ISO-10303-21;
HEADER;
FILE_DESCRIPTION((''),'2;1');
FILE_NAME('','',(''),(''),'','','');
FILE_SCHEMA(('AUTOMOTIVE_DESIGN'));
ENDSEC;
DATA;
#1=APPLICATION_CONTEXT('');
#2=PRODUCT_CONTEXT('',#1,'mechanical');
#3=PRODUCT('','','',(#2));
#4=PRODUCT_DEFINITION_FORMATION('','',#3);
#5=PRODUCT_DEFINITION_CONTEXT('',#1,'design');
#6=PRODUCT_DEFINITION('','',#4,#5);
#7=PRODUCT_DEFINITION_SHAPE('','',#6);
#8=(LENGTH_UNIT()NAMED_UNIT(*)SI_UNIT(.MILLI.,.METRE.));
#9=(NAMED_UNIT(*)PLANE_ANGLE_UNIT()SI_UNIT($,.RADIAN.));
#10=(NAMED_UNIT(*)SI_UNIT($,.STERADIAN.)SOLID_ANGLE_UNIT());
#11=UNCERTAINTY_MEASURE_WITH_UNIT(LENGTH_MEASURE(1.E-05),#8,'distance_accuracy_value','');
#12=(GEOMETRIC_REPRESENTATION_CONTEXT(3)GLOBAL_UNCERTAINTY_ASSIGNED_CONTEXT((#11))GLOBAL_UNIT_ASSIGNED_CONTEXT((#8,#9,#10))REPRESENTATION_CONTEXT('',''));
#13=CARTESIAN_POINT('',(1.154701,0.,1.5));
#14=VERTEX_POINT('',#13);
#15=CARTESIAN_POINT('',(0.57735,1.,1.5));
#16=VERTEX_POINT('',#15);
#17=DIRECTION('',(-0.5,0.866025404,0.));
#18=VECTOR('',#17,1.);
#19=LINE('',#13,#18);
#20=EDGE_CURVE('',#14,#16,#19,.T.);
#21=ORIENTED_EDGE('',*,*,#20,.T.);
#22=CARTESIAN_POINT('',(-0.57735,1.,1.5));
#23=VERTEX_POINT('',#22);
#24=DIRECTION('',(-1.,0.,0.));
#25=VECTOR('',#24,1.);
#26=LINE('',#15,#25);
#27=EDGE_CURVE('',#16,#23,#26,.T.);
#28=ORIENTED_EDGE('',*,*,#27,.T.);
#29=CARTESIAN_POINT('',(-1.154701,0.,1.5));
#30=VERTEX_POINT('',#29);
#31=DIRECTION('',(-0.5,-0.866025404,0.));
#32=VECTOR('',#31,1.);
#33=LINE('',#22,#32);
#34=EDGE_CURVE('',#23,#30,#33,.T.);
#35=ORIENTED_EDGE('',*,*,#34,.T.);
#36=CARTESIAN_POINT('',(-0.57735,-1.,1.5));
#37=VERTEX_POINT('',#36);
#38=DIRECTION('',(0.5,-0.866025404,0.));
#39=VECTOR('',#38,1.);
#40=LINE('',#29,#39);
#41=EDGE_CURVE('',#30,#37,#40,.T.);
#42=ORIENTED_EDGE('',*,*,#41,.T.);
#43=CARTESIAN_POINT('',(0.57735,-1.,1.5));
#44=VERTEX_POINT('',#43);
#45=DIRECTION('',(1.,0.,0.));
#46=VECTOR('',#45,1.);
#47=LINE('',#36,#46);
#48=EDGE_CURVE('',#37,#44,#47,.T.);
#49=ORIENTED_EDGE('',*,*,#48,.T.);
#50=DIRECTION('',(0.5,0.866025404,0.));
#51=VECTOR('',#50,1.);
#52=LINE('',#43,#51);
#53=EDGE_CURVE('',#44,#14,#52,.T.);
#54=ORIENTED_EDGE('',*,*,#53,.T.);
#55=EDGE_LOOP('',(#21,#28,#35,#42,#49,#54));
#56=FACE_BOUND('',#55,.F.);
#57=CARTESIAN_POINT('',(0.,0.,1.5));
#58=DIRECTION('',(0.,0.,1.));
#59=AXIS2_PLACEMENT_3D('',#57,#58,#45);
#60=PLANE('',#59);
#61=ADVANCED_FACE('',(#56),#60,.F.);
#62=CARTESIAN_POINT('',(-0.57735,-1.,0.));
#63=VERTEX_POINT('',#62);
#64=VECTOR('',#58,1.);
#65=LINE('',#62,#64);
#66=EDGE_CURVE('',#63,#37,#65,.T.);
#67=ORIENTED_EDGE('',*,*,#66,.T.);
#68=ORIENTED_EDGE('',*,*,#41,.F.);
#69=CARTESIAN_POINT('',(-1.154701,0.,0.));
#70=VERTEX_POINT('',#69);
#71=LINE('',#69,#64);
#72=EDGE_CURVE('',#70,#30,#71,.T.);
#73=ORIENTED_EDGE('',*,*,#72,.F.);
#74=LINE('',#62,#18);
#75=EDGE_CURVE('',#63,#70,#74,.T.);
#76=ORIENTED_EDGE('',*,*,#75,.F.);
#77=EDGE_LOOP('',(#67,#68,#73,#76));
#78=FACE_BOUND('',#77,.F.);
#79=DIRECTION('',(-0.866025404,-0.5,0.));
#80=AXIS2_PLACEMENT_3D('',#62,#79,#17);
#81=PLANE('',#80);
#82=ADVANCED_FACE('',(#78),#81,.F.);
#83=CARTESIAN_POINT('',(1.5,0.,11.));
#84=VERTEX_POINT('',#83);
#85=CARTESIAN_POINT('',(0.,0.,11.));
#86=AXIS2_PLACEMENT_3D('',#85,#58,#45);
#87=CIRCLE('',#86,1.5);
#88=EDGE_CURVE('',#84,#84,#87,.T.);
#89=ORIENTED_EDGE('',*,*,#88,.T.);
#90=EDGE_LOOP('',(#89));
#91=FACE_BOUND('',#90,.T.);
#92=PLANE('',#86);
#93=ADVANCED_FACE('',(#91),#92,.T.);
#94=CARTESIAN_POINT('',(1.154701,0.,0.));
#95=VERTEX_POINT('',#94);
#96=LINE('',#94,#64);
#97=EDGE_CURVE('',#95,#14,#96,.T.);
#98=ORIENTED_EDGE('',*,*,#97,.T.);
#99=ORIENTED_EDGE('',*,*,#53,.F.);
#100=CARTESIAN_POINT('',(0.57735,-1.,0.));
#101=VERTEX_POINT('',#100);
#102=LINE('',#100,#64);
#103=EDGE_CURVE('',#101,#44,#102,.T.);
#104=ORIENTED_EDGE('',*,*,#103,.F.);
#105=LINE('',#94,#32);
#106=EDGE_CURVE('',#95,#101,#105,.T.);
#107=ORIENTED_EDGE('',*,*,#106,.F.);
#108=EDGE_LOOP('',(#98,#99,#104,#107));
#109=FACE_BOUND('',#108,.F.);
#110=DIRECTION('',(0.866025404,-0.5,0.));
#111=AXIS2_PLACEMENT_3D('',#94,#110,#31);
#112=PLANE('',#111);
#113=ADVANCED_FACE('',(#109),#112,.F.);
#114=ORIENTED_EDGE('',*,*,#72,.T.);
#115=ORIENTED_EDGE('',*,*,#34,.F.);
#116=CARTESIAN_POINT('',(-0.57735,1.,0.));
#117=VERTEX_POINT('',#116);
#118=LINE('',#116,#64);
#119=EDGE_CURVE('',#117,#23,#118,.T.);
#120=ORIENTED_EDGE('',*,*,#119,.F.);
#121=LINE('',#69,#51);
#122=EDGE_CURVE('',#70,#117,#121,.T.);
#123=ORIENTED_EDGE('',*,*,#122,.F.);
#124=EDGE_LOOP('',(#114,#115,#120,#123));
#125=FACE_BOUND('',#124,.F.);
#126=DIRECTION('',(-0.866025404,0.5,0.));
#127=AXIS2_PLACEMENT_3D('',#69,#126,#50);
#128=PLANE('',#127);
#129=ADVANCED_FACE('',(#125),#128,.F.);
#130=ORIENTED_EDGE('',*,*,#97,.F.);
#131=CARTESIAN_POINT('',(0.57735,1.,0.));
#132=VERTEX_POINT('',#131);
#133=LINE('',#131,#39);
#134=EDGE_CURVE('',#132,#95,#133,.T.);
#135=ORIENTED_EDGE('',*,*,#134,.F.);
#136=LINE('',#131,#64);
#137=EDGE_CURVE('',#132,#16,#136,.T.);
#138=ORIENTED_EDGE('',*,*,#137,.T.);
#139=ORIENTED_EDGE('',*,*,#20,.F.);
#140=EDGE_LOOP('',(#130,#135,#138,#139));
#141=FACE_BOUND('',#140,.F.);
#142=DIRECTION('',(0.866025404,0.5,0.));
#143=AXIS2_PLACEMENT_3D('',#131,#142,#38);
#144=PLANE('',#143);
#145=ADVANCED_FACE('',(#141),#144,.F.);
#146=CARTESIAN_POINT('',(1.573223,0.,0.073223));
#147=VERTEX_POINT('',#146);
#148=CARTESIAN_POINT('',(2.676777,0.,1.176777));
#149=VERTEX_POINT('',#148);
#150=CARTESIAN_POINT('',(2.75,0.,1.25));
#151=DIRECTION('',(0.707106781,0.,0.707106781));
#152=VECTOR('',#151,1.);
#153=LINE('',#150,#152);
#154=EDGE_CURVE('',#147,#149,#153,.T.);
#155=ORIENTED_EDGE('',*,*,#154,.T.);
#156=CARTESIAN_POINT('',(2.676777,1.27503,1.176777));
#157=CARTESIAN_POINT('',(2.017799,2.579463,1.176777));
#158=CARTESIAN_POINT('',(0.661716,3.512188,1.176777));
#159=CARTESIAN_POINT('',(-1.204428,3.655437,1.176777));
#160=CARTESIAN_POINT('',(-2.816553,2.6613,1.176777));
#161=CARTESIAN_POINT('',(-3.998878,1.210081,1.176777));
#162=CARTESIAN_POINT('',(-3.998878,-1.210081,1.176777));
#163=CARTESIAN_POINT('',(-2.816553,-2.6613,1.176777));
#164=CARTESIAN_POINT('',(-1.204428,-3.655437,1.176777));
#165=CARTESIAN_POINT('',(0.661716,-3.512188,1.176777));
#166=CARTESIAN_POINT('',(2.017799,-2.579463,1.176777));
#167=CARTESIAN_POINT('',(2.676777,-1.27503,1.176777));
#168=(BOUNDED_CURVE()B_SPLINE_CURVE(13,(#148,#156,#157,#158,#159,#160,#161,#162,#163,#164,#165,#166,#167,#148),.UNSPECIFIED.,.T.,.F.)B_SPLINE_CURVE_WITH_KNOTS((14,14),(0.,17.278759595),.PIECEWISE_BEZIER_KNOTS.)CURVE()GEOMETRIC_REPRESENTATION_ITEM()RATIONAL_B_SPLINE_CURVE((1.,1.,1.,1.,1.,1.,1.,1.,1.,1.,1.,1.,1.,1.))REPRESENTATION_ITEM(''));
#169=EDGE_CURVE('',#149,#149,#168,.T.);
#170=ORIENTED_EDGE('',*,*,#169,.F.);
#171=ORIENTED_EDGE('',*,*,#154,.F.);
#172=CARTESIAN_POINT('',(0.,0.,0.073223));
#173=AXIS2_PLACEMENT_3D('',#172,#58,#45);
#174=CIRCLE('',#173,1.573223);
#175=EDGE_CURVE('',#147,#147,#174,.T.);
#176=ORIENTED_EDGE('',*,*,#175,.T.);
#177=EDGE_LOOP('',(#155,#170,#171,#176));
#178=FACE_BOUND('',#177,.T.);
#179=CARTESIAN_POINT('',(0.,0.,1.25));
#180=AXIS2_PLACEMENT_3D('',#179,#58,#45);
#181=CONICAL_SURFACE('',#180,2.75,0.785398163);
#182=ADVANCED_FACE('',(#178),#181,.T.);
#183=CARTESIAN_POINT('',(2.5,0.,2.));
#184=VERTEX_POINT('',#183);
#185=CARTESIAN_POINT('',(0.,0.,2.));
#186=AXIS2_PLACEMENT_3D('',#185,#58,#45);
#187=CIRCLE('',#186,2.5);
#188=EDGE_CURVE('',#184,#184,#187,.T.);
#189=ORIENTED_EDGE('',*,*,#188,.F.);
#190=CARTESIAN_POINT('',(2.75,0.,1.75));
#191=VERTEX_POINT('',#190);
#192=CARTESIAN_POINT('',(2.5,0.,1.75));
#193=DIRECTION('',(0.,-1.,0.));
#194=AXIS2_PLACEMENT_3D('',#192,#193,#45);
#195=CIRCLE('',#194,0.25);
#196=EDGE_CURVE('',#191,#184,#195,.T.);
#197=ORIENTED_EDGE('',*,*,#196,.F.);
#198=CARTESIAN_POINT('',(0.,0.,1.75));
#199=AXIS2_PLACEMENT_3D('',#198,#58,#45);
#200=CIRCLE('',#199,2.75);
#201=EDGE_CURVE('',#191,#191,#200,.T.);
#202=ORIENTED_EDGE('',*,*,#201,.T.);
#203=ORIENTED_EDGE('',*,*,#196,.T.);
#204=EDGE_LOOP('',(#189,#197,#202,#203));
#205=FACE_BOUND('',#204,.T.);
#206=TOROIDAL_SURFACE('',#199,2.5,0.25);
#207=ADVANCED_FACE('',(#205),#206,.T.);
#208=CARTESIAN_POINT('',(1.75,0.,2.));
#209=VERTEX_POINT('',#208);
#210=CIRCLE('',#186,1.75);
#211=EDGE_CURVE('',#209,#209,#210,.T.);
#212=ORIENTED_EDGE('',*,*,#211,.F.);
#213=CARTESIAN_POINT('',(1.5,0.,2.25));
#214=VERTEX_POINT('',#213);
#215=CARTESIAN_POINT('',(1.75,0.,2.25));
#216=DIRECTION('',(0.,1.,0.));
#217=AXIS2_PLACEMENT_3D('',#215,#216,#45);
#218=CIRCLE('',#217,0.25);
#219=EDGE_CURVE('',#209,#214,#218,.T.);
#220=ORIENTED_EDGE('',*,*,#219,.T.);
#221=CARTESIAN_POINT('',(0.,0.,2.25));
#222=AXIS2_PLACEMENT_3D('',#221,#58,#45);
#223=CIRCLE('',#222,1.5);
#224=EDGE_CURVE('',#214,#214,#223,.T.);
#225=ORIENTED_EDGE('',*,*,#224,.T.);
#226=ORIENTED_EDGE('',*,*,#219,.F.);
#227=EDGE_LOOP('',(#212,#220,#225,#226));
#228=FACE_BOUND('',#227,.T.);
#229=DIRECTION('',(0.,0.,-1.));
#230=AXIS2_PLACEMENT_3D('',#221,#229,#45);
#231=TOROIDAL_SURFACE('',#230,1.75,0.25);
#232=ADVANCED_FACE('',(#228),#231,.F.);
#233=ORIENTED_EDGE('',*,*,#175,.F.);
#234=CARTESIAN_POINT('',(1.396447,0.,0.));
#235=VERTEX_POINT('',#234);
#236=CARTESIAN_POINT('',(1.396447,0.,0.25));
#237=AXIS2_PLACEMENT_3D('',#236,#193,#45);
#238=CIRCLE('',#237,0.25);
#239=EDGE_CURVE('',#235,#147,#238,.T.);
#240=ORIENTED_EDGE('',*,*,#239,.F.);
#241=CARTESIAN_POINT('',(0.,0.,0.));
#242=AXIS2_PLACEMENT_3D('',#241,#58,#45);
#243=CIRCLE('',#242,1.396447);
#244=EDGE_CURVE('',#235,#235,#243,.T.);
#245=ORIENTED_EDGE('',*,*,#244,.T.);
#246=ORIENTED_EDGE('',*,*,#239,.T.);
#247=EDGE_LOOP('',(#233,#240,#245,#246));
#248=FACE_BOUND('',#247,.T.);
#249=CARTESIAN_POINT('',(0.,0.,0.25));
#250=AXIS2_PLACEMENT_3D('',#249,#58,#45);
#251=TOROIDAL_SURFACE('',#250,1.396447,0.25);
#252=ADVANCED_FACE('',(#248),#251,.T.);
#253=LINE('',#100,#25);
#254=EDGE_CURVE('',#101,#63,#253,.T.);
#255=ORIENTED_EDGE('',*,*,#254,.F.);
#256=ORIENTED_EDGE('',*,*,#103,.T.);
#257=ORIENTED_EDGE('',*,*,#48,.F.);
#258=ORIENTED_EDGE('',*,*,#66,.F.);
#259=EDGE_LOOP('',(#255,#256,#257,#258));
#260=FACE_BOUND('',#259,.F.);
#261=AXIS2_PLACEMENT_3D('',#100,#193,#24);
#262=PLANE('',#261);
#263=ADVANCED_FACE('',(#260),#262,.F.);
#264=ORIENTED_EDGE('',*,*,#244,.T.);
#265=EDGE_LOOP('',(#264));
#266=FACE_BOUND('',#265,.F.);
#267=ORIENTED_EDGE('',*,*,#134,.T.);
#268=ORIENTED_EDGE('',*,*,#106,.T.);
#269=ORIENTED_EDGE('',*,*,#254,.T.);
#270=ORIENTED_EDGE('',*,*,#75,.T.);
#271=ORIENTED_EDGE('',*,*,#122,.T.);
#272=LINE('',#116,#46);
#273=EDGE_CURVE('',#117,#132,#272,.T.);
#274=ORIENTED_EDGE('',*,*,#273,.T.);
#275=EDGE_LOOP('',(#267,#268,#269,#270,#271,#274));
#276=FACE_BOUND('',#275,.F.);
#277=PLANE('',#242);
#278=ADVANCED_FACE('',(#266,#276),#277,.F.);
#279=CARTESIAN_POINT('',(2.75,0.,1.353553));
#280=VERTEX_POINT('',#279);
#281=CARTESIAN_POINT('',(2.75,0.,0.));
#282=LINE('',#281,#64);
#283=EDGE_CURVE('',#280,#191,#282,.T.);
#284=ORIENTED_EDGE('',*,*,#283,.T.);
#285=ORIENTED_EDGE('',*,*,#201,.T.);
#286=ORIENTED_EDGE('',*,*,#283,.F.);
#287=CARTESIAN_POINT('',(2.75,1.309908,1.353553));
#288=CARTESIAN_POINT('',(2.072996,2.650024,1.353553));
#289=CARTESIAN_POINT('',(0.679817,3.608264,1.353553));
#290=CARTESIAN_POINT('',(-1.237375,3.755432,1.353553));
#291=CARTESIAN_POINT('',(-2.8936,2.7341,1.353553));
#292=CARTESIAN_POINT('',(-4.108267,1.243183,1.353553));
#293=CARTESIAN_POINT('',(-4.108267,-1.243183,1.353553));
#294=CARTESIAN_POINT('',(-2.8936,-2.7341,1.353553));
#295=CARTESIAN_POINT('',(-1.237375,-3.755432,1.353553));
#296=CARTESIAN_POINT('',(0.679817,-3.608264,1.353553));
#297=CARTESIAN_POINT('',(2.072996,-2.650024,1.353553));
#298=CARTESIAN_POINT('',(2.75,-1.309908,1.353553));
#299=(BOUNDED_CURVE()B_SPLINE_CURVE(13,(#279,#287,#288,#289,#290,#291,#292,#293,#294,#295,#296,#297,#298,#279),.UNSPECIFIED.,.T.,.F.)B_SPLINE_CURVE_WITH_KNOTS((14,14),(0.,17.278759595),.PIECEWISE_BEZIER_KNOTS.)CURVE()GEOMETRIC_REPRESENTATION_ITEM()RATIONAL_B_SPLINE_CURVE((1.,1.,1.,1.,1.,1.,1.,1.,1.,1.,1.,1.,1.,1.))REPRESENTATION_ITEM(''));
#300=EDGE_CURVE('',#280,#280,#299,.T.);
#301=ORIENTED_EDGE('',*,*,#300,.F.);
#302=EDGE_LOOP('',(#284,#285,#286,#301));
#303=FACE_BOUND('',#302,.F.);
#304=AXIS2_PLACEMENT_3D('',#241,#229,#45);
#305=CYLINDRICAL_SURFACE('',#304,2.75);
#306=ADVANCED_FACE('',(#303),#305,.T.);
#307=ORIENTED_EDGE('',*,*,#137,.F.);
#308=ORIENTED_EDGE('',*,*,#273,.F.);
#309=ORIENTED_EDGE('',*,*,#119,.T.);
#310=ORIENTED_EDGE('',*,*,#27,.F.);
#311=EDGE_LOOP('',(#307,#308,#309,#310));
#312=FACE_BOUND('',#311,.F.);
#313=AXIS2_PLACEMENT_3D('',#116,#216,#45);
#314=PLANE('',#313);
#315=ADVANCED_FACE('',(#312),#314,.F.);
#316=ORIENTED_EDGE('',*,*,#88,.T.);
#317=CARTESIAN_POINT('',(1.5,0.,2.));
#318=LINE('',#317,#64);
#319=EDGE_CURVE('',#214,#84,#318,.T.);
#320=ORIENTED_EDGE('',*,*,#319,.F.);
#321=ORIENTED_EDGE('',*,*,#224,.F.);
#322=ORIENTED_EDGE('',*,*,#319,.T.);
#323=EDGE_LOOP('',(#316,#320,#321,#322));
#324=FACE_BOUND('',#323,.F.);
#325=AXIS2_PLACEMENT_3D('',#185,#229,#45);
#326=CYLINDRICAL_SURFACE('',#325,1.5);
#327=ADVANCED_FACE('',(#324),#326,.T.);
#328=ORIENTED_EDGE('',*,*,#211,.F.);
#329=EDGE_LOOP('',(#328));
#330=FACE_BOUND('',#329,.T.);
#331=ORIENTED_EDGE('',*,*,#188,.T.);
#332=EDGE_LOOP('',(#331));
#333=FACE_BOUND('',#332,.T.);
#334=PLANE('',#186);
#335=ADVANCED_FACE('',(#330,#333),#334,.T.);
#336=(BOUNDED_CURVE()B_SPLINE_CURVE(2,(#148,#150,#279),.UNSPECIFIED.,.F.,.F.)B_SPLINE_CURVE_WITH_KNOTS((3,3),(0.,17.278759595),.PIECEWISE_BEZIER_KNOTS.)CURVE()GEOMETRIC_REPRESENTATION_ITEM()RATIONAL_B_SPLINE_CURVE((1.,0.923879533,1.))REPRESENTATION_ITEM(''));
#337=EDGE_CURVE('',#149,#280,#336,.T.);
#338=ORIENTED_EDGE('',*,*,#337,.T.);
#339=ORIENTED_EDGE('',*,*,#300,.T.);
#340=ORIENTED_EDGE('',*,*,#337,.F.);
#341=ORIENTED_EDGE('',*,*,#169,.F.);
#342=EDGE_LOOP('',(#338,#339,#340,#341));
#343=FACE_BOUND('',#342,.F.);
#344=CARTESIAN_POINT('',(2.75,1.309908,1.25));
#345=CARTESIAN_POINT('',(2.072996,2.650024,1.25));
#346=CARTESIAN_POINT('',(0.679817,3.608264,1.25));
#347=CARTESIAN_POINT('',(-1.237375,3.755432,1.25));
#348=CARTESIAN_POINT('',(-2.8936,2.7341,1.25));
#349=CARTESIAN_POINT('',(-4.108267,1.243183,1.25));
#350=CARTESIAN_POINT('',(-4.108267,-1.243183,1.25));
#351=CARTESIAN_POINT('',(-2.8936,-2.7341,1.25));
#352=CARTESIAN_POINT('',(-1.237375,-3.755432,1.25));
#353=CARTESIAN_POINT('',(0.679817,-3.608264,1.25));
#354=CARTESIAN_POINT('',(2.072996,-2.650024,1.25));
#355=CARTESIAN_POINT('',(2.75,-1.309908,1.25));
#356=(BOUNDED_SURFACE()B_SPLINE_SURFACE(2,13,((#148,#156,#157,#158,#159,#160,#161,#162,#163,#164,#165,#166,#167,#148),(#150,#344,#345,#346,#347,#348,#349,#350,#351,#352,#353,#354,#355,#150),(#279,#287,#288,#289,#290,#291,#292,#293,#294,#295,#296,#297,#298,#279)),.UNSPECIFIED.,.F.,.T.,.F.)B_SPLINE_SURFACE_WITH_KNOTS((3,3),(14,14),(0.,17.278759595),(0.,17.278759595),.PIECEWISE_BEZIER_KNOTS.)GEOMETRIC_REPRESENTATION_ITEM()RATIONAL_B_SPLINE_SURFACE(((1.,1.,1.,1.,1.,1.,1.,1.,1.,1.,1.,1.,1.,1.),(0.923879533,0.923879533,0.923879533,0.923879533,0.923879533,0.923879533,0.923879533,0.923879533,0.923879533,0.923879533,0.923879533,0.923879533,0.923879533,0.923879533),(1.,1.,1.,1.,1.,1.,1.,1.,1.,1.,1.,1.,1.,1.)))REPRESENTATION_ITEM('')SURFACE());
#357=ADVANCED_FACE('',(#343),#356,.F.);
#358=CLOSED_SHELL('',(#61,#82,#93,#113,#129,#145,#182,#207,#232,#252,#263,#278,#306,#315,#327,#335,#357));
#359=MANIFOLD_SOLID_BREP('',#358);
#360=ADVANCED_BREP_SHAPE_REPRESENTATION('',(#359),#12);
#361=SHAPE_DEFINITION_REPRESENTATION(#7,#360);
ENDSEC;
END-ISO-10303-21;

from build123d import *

# Parameters (mm, degrees)
F1_R     = 2.75
F1_R_2   = 1.5
F2_DEPTH = 2
F3_START = 1.5
F3_DEPTH = 0.5
F4_START = 2
F4_DEPTH = 9
F5_SIZE2 = 1.25
F5_SIZE  = 1.25
F6_R     = 0.25


# Not quite as in the source:
# - a feature names something its author has since deleted; it is built from what else it names


with BuildPart() as f2:
    # F1 (on Top) → F2 (new body)
    with BuildSketch(Plane.XY):
        Circle(F1_R)
        Circle(F1_R_2, mode=Mode.SUBTRACT)
        Circle(F1_R_2)
        Polygon((-0.5773502692, -1), (-1.1547005384, 0), (-0.5773502692, 1), (0.5773502692, 1), (1.1547005384, 0), (0.5773502692, -1), align=None, mode=Mode.SUBTRACT)
    extrude(amount=F2_DEPTH)

    # F1 (on Top) → F3 (join)
    with BuildSketch(Plane.XY.offset(F3_START)):
        Polygon((-0.5773502692, 1), (-1.1547005384, 0), (-0.5773502692, -1), (0.5773502692, -1), (1.1547005384, 0), (0.5773502692, 1), align=None)
    extrude(amount=F3_DEPTH)

    # F1 (on Top) → F4 (join)
    with BuildSketch(Plane.XY.offset(F4_START)):
        Circle(F1_R_2)
        Polygon((-0.5773502692, -1), (-1.1547005384, 0), (-0.5773502692, 1), (0.5773502692, 1), (1.1547005384, 0), (0.5773502692, -1), align=None, mode=Mode.SUBTRACT)
        Polygon((-0.5773502692, 1), (-1.1547005384, 0), (-0.5773502692, -1), (0.5773502692, -1), (1.1547005384, 0), (0.5773502692, 1), align=None)
    extrude(amount=F4_DEPTH)

    # F5
    f5_edges = [f2.edges().sort_by_distance(p)[0] for p in [
        (-2.75, 0, 0),
    ]]
    chamfer(f5_edges, length=F5_SIZE, length2=F5_SIZE2)

    # F6
    f6_edges = [f2.edges().sort_by_distance(p)[0] for p in [
        (-2.75, 0, 2),
        (-1.5, 0, 2),
        (-1.5, 0, 0),
        (-2.75, 0, 1.25),
    ]]
    fillet(f6_edges, radius=F6_R)


solid = f2.part
